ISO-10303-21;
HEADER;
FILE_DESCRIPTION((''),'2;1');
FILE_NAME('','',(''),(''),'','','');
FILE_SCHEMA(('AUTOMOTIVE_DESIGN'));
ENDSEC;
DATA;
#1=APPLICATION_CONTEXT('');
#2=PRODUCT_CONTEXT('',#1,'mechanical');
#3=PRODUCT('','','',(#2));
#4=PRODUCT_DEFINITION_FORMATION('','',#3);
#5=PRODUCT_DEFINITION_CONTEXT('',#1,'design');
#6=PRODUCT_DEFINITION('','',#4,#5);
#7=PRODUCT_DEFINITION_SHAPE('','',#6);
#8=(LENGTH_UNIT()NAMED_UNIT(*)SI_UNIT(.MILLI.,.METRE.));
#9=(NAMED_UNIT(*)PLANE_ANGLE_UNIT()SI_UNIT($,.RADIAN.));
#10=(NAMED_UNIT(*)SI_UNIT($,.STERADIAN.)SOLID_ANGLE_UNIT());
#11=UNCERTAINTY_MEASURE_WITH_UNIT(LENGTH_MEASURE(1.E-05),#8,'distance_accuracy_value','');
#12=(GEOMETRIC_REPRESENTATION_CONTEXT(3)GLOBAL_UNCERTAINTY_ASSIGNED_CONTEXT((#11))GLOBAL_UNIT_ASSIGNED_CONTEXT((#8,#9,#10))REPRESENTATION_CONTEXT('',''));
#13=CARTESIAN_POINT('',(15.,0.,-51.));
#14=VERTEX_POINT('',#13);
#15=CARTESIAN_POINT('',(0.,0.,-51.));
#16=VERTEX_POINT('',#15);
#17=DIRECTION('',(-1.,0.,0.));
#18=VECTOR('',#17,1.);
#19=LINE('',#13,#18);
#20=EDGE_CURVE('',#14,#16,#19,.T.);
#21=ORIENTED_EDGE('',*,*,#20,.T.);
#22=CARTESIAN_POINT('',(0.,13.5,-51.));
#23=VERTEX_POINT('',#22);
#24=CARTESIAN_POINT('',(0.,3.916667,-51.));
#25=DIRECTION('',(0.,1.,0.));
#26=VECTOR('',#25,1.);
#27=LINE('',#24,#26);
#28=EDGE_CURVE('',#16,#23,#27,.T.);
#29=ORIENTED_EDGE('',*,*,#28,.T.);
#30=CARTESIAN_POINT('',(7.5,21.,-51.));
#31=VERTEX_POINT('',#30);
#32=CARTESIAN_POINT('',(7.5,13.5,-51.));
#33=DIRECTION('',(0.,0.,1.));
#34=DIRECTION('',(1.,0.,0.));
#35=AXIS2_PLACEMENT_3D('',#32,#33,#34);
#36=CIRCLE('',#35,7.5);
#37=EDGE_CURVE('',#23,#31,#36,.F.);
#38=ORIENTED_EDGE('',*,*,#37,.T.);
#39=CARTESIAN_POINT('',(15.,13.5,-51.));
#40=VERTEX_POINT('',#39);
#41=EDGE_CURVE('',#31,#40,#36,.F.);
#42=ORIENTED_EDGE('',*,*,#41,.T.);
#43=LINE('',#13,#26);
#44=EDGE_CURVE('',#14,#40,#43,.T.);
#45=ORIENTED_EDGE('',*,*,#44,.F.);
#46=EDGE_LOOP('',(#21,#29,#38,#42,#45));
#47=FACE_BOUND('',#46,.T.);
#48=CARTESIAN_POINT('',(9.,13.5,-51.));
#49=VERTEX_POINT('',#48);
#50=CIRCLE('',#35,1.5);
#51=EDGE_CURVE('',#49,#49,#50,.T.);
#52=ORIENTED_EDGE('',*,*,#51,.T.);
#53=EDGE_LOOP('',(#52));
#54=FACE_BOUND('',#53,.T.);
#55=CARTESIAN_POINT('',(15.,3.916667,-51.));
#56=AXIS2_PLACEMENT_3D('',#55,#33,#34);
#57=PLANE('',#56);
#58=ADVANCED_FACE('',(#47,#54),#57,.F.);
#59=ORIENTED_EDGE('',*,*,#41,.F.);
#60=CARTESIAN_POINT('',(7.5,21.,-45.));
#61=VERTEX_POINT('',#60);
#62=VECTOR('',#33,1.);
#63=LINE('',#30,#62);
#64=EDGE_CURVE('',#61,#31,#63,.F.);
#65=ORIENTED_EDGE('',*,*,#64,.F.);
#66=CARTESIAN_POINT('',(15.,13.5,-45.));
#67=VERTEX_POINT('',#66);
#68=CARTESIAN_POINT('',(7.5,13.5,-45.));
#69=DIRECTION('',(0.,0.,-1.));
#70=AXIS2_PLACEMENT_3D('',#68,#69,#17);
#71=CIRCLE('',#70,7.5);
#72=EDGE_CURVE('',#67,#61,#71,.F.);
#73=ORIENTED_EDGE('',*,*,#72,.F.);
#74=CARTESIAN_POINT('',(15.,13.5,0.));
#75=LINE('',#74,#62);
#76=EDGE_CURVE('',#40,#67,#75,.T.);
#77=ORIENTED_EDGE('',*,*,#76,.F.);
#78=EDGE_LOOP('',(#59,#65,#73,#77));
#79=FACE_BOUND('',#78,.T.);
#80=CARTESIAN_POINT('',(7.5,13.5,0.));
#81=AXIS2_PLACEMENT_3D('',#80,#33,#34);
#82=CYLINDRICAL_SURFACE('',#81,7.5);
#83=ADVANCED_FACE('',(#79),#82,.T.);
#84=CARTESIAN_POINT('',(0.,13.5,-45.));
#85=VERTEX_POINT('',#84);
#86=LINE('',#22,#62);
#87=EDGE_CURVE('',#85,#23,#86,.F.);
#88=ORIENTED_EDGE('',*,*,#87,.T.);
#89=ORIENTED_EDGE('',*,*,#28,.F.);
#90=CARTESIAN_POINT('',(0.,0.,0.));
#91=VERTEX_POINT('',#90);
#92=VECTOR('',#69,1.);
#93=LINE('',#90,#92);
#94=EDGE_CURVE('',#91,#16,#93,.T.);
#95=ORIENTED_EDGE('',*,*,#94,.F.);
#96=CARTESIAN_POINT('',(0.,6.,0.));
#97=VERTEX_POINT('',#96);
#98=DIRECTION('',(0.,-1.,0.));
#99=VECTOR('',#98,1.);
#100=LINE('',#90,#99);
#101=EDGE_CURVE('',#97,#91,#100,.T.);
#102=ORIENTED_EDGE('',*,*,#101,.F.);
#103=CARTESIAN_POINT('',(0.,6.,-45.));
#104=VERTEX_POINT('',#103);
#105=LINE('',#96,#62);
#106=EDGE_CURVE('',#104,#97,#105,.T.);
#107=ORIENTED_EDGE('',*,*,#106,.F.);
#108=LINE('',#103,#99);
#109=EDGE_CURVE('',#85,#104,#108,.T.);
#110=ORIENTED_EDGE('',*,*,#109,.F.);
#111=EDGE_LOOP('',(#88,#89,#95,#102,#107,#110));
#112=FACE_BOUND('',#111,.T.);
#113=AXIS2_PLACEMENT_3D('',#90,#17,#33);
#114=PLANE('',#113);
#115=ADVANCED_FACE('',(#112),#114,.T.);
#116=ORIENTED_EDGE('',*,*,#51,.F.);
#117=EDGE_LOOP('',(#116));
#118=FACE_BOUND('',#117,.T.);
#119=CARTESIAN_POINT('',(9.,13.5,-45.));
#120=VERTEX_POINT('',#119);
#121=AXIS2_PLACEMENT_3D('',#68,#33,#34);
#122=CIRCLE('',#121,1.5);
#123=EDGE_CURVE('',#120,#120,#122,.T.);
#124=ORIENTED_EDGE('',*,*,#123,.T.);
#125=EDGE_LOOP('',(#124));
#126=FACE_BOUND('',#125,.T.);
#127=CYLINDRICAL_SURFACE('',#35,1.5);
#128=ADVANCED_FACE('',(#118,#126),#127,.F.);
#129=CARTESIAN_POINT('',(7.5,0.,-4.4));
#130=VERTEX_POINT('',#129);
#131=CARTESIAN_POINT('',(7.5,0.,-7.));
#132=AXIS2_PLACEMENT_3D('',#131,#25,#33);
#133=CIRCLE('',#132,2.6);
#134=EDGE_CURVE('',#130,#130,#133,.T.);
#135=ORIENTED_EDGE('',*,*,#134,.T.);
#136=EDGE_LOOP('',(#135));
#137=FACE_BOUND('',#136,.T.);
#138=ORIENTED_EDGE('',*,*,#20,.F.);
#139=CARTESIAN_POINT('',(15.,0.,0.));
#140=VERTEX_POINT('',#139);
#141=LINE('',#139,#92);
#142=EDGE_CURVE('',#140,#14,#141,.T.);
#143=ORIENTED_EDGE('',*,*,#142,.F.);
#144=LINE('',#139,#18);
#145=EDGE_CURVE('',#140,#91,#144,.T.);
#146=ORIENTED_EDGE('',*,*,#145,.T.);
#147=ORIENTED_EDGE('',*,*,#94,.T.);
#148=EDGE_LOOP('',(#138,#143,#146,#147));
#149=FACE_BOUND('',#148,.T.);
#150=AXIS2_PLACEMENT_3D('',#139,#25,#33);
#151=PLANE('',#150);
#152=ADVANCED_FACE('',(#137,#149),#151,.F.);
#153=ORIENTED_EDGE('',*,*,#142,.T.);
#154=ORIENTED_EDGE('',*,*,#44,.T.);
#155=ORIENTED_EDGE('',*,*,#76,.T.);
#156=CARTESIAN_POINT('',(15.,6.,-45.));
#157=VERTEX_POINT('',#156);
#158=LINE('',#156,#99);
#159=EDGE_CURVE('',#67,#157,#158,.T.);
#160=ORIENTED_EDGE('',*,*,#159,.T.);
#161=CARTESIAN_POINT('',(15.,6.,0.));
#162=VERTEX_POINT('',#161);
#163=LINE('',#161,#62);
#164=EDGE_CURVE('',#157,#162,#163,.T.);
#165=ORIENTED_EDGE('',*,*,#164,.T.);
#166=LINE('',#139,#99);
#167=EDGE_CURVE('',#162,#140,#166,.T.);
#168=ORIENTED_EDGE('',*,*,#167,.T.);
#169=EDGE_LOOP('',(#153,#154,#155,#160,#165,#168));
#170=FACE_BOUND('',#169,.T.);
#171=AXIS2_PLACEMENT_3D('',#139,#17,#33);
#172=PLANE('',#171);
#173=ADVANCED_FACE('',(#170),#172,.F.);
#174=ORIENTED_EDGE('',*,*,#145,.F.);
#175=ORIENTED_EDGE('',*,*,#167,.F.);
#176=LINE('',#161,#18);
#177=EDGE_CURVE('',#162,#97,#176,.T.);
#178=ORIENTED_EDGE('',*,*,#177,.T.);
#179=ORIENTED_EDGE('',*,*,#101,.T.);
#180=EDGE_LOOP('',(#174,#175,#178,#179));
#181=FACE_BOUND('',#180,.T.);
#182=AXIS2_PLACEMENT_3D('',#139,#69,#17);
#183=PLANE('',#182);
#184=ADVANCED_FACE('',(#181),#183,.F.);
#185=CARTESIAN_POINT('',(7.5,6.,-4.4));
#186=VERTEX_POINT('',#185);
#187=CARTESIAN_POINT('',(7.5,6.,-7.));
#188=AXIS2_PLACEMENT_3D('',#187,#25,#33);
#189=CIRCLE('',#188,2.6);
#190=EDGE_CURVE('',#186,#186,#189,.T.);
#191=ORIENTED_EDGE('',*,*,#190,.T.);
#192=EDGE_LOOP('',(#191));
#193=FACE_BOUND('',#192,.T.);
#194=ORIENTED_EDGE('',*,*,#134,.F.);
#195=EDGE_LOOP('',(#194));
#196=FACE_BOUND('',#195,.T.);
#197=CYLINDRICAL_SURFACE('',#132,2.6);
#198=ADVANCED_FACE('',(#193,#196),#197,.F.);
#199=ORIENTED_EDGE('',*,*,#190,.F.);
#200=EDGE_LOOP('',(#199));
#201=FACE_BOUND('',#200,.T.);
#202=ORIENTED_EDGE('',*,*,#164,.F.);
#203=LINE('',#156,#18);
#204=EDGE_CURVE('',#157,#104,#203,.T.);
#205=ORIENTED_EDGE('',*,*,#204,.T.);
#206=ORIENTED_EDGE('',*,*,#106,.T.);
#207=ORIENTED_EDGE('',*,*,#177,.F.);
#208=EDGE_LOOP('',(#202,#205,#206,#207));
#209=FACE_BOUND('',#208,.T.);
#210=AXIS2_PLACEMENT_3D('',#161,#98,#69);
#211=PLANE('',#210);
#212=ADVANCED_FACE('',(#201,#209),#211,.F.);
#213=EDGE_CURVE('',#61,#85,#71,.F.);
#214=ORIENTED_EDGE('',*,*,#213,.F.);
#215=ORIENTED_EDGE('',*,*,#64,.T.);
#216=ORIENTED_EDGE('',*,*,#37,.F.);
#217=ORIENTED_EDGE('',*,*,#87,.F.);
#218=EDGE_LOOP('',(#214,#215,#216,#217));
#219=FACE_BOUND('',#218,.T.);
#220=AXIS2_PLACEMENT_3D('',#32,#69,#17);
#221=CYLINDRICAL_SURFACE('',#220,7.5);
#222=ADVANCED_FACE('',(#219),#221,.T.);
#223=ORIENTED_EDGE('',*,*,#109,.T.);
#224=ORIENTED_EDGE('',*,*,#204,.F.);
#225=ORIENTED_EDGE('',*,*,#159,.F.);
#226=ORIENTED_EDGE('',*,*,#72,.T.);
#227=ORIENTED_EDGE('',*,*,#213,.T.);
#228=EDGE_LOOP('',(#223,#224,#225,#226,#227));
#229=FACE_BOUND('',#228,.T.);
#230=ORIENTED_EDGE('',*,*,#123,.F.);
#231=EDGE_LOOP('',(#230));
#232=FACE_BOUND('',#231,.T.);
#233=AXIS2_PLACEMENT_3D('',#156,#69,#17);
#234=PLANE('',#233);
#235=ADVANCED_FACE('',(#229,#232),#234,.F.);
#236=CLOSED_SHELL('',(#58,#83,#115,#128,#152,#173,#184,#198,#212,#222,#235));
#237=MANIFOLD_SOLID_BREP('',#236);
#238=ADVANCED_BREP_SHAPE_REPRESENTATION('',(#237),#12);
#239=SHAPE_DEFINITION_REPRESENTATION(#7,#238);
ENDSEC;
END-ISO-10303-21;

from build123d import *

# Parameters (mm, degrees)
BOSS_EXTRUDE1_DEPTH = 15
SKETCH2_R           = 2.6
CUT_EXTRUDE1_DEPTH  = 56.235857919
SKETCH3_R           = 1.5
CUT_EXTRUDE2_DEPTH  = 52.874849397
FILLET1_R           = 7.5


with BuildPart() as part:
    # Sketch1 → Boss-Extrude1 (new body)
    with BuildSketch(Plane(origin=(0, 0, 0), x_dir=(0, 0, -1), z_dir=(1, 0, 0))):
        Polygon((0, 0), (51, 0), (51, 3.916666667), (51, 21), (45, 21), (45, 6), (0, 6), align=None)
    extrude(amount=BOSS_EXTRUDE1_DEPTH)

    # Sketch2 → Cut-Extrude1 (cut, through all)
    with BuildSketch(Plane(origin=(0, 6, 0), x_dir=(1, 0, 0), z_dir=(0, 1, 0))):
        with Locations(Location((7.5, 7, 0), (0, 0, 270))):
            Circle(SKETCH2_R)
    extrude(amount=-CUT_EXTRUDE1_DEPTH, mode=Mode.SUBTRACT)

    # Sketch3 → Cut-Extrude2 (cut, through all)
    with BuildSketch(Plane.XY.offset(-45)):
        with Locations((7.5, 13.5)):
            Circle(SKETCH3_R)
    extrude(amount=-CUT_EXTRUDE2_DEPTH, mode=Mode.SUBTRACT)

    # Fillet1
    fillet1_edges = [part.edges().sort_by_distance(p)[0] for p in [
        (0, 21, -48),
        (15, 21, -48),
    ]]
    fillet(fillet1_edges, radius=FILLET1_R - 0.0001)  # a hair under: the kernel refuses the full size


solid = part.part
